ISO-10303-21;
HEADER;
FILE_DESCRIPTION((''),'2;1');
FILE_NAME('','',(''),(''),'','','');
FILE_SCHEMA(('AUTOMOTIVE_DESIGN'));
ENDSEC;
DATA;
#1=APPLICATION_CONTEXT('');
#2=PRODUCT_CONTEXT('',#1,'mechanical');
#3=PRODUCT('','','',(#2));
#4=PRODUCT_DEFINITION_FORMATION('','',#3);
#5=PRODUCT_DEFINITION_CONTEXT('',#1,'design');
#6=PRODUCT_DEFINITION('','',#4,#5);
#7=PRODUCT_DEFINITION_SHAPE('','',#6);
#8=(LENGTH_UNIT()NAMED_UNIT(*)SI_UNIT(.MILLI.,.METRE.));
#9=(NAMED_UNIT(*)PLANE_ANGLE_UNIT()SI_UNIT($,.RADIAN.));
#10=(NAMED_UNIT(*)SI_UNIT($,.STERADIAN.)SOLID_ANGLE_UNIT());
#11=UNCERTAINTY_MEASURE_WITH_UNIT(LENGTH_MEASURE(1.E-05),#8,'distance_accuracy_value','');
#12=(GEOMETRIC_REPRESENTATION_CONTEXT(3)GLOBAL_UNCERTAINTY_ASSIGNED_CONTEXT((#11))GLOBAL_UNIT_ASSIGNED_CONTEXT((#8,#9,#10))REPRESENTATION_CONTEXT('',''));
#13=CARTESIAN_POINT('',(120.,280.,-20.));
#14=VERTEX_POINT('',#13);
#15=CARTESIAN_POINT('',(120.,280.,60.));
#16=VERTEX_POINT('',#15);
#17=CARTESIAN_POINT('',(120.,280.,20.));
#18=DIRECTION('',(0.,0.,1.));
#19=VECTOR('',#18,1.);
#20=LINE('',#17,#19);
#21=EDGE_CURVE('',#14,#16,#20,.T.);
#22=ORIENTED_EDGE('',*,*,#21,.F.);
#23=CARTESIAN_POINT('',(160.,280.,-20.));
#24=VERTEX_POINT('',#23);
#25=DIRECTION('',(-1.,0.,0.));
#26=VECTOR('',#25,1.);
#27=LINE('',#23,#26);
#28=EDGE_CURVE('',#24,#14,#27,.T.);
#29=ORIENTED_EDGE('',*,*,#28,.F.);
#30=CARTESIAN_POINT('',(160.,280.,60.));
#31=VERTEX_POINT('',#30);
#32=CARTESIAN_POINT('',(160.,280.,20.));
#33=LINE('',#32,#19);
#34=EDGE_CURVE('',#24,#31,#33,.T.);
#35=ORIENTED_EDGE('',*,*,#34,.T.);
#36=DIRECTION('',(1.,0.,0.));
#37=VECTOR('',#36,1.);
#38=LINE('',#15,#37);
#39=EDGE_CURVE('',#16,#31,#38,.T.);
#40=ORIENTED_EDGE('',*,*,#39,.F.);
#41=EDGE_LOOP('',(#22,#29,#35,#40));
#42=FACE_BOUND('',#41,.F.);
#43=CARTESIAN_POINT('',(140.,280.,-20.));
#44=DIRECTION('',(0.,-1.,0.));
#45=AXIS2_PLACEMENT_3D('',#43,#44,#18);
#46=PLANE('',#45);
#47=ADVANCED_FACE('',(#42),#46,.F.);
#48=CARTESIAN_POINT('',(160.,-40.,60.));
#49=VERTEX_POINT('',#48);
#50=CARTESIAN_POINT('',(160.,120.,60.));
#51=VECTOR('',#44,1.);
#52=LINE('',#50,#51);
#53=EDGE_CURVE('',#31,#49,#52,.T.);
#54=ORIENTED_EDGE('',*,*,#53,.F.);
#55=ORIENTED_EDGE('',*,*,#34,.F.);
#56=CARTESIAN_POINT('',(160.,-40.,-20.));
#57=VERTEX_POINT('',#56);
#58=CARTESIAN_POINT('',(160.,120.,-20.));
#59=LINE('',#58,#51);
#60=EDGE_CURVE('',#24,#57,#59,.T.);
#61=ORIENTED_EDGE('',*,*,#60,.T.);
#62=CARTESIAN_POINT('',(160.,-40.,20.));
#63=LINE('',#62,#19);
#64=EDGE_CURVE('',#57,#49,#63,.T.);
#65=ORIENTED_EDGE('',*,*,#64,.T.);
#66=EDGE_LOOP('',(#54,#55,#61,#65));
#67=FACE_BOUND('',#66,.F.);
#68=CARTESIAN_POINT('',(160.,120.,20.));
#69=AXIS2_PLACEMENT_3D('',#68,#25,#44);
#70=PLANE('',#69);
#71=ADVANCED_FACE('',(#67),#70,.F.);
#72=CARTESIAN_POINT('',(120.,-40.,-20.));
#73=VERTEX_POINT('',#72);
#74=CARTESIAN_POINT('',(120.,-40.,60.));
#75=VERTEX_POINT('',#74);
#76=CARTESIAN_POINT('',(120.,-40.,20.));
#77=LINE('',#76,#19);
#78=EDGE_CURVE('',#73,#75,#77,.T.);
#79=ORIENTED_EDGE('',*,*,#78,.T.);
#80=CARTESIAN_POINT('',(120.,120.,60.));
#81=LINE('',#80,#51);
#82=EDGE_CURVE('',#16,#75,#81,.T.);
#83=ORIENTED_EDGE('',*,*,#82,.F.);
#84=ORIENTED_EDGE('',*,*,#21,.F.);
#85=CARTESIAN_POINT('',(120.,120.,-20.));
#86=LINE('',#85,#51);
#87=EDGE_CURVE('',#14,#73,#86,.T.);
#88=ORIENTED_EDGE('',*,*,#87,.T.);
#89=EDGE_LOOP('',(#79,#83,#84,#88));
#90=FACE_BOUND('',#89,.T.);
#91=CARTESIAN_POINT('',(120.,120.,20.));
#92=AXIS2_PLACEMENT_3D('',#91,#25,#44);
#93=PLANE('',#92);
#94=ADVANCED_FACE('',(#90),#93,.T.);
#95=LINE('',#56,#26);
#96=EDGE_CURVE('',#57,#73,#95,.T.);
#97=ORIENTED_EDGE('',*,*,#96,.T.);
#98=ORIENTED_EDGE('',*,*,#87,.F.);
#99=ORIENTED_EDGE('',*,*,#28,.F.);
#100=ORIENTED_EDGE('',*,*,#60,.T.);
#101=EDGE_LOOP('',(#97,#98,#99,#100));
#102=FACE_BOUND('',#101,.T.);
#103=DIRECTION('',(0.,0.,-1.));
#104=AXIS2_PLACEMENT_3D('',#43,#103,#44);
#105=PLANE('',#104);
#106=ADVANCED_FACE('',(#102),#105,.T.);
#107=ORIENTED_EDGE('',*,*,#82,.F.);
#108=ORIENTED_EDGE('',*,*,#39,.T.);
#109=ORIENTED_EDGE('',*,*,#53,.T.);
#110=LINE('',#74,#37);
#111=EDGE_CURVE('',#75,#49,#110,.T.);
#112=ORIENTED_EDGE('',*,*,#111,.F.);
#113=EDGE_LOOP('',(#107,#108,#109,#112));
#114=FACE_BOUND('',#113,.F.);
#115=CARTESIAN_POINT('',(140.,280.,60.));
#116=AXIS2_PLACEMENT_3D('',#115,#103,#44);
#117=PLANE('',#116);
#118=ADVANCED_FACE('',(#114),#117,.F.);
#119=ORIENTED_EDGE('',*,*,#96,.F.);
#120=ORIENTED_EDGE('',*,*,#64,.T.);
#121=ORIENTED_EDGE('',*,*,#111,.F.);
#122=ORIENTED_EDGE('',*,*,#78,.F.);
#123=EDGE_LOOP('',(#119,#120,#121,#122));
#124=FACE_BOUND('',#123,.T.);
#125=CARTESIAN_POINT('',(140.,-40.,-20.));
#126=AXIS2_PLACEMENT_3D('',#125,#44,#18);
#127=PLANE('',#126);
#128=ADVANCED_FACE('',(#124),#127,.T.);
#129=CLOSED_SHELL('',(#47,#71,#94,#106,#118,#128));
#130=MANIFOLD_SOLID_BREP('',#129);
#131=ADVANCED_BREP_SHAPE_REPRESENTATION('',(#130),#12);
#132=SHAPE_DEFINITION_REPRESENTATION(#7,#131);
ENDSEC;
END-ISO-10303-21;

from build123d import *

# Parameters (mm, degrees)
F0_W     = 320
F0_H     = 80
F1_DEPTH = 20
F2_ANGLE = 90
F3_ANGLE = 90


with BuildPart() as f1:
    # F0 (on Top) → F1 (new body, symmetric)
    with BuildSketch(Plane.XY):
        Rectangle(F0_W, F0_H)
    extrude(amount=F1_DEPTH, both=True)


with BuildPart() as f1_1:
    # F2: moved
    add(f1.part.rotate(Axis((0, -40, -20), (1, 0, 0)), F2_ANGLE))


with BuildPart() as f1_2:
    # F3: moved
    add(f1_1.part.rotate(Axis((160, -40, 20), (0, 0, -1)), F3_ANGLE))


solid = f1_2.part
